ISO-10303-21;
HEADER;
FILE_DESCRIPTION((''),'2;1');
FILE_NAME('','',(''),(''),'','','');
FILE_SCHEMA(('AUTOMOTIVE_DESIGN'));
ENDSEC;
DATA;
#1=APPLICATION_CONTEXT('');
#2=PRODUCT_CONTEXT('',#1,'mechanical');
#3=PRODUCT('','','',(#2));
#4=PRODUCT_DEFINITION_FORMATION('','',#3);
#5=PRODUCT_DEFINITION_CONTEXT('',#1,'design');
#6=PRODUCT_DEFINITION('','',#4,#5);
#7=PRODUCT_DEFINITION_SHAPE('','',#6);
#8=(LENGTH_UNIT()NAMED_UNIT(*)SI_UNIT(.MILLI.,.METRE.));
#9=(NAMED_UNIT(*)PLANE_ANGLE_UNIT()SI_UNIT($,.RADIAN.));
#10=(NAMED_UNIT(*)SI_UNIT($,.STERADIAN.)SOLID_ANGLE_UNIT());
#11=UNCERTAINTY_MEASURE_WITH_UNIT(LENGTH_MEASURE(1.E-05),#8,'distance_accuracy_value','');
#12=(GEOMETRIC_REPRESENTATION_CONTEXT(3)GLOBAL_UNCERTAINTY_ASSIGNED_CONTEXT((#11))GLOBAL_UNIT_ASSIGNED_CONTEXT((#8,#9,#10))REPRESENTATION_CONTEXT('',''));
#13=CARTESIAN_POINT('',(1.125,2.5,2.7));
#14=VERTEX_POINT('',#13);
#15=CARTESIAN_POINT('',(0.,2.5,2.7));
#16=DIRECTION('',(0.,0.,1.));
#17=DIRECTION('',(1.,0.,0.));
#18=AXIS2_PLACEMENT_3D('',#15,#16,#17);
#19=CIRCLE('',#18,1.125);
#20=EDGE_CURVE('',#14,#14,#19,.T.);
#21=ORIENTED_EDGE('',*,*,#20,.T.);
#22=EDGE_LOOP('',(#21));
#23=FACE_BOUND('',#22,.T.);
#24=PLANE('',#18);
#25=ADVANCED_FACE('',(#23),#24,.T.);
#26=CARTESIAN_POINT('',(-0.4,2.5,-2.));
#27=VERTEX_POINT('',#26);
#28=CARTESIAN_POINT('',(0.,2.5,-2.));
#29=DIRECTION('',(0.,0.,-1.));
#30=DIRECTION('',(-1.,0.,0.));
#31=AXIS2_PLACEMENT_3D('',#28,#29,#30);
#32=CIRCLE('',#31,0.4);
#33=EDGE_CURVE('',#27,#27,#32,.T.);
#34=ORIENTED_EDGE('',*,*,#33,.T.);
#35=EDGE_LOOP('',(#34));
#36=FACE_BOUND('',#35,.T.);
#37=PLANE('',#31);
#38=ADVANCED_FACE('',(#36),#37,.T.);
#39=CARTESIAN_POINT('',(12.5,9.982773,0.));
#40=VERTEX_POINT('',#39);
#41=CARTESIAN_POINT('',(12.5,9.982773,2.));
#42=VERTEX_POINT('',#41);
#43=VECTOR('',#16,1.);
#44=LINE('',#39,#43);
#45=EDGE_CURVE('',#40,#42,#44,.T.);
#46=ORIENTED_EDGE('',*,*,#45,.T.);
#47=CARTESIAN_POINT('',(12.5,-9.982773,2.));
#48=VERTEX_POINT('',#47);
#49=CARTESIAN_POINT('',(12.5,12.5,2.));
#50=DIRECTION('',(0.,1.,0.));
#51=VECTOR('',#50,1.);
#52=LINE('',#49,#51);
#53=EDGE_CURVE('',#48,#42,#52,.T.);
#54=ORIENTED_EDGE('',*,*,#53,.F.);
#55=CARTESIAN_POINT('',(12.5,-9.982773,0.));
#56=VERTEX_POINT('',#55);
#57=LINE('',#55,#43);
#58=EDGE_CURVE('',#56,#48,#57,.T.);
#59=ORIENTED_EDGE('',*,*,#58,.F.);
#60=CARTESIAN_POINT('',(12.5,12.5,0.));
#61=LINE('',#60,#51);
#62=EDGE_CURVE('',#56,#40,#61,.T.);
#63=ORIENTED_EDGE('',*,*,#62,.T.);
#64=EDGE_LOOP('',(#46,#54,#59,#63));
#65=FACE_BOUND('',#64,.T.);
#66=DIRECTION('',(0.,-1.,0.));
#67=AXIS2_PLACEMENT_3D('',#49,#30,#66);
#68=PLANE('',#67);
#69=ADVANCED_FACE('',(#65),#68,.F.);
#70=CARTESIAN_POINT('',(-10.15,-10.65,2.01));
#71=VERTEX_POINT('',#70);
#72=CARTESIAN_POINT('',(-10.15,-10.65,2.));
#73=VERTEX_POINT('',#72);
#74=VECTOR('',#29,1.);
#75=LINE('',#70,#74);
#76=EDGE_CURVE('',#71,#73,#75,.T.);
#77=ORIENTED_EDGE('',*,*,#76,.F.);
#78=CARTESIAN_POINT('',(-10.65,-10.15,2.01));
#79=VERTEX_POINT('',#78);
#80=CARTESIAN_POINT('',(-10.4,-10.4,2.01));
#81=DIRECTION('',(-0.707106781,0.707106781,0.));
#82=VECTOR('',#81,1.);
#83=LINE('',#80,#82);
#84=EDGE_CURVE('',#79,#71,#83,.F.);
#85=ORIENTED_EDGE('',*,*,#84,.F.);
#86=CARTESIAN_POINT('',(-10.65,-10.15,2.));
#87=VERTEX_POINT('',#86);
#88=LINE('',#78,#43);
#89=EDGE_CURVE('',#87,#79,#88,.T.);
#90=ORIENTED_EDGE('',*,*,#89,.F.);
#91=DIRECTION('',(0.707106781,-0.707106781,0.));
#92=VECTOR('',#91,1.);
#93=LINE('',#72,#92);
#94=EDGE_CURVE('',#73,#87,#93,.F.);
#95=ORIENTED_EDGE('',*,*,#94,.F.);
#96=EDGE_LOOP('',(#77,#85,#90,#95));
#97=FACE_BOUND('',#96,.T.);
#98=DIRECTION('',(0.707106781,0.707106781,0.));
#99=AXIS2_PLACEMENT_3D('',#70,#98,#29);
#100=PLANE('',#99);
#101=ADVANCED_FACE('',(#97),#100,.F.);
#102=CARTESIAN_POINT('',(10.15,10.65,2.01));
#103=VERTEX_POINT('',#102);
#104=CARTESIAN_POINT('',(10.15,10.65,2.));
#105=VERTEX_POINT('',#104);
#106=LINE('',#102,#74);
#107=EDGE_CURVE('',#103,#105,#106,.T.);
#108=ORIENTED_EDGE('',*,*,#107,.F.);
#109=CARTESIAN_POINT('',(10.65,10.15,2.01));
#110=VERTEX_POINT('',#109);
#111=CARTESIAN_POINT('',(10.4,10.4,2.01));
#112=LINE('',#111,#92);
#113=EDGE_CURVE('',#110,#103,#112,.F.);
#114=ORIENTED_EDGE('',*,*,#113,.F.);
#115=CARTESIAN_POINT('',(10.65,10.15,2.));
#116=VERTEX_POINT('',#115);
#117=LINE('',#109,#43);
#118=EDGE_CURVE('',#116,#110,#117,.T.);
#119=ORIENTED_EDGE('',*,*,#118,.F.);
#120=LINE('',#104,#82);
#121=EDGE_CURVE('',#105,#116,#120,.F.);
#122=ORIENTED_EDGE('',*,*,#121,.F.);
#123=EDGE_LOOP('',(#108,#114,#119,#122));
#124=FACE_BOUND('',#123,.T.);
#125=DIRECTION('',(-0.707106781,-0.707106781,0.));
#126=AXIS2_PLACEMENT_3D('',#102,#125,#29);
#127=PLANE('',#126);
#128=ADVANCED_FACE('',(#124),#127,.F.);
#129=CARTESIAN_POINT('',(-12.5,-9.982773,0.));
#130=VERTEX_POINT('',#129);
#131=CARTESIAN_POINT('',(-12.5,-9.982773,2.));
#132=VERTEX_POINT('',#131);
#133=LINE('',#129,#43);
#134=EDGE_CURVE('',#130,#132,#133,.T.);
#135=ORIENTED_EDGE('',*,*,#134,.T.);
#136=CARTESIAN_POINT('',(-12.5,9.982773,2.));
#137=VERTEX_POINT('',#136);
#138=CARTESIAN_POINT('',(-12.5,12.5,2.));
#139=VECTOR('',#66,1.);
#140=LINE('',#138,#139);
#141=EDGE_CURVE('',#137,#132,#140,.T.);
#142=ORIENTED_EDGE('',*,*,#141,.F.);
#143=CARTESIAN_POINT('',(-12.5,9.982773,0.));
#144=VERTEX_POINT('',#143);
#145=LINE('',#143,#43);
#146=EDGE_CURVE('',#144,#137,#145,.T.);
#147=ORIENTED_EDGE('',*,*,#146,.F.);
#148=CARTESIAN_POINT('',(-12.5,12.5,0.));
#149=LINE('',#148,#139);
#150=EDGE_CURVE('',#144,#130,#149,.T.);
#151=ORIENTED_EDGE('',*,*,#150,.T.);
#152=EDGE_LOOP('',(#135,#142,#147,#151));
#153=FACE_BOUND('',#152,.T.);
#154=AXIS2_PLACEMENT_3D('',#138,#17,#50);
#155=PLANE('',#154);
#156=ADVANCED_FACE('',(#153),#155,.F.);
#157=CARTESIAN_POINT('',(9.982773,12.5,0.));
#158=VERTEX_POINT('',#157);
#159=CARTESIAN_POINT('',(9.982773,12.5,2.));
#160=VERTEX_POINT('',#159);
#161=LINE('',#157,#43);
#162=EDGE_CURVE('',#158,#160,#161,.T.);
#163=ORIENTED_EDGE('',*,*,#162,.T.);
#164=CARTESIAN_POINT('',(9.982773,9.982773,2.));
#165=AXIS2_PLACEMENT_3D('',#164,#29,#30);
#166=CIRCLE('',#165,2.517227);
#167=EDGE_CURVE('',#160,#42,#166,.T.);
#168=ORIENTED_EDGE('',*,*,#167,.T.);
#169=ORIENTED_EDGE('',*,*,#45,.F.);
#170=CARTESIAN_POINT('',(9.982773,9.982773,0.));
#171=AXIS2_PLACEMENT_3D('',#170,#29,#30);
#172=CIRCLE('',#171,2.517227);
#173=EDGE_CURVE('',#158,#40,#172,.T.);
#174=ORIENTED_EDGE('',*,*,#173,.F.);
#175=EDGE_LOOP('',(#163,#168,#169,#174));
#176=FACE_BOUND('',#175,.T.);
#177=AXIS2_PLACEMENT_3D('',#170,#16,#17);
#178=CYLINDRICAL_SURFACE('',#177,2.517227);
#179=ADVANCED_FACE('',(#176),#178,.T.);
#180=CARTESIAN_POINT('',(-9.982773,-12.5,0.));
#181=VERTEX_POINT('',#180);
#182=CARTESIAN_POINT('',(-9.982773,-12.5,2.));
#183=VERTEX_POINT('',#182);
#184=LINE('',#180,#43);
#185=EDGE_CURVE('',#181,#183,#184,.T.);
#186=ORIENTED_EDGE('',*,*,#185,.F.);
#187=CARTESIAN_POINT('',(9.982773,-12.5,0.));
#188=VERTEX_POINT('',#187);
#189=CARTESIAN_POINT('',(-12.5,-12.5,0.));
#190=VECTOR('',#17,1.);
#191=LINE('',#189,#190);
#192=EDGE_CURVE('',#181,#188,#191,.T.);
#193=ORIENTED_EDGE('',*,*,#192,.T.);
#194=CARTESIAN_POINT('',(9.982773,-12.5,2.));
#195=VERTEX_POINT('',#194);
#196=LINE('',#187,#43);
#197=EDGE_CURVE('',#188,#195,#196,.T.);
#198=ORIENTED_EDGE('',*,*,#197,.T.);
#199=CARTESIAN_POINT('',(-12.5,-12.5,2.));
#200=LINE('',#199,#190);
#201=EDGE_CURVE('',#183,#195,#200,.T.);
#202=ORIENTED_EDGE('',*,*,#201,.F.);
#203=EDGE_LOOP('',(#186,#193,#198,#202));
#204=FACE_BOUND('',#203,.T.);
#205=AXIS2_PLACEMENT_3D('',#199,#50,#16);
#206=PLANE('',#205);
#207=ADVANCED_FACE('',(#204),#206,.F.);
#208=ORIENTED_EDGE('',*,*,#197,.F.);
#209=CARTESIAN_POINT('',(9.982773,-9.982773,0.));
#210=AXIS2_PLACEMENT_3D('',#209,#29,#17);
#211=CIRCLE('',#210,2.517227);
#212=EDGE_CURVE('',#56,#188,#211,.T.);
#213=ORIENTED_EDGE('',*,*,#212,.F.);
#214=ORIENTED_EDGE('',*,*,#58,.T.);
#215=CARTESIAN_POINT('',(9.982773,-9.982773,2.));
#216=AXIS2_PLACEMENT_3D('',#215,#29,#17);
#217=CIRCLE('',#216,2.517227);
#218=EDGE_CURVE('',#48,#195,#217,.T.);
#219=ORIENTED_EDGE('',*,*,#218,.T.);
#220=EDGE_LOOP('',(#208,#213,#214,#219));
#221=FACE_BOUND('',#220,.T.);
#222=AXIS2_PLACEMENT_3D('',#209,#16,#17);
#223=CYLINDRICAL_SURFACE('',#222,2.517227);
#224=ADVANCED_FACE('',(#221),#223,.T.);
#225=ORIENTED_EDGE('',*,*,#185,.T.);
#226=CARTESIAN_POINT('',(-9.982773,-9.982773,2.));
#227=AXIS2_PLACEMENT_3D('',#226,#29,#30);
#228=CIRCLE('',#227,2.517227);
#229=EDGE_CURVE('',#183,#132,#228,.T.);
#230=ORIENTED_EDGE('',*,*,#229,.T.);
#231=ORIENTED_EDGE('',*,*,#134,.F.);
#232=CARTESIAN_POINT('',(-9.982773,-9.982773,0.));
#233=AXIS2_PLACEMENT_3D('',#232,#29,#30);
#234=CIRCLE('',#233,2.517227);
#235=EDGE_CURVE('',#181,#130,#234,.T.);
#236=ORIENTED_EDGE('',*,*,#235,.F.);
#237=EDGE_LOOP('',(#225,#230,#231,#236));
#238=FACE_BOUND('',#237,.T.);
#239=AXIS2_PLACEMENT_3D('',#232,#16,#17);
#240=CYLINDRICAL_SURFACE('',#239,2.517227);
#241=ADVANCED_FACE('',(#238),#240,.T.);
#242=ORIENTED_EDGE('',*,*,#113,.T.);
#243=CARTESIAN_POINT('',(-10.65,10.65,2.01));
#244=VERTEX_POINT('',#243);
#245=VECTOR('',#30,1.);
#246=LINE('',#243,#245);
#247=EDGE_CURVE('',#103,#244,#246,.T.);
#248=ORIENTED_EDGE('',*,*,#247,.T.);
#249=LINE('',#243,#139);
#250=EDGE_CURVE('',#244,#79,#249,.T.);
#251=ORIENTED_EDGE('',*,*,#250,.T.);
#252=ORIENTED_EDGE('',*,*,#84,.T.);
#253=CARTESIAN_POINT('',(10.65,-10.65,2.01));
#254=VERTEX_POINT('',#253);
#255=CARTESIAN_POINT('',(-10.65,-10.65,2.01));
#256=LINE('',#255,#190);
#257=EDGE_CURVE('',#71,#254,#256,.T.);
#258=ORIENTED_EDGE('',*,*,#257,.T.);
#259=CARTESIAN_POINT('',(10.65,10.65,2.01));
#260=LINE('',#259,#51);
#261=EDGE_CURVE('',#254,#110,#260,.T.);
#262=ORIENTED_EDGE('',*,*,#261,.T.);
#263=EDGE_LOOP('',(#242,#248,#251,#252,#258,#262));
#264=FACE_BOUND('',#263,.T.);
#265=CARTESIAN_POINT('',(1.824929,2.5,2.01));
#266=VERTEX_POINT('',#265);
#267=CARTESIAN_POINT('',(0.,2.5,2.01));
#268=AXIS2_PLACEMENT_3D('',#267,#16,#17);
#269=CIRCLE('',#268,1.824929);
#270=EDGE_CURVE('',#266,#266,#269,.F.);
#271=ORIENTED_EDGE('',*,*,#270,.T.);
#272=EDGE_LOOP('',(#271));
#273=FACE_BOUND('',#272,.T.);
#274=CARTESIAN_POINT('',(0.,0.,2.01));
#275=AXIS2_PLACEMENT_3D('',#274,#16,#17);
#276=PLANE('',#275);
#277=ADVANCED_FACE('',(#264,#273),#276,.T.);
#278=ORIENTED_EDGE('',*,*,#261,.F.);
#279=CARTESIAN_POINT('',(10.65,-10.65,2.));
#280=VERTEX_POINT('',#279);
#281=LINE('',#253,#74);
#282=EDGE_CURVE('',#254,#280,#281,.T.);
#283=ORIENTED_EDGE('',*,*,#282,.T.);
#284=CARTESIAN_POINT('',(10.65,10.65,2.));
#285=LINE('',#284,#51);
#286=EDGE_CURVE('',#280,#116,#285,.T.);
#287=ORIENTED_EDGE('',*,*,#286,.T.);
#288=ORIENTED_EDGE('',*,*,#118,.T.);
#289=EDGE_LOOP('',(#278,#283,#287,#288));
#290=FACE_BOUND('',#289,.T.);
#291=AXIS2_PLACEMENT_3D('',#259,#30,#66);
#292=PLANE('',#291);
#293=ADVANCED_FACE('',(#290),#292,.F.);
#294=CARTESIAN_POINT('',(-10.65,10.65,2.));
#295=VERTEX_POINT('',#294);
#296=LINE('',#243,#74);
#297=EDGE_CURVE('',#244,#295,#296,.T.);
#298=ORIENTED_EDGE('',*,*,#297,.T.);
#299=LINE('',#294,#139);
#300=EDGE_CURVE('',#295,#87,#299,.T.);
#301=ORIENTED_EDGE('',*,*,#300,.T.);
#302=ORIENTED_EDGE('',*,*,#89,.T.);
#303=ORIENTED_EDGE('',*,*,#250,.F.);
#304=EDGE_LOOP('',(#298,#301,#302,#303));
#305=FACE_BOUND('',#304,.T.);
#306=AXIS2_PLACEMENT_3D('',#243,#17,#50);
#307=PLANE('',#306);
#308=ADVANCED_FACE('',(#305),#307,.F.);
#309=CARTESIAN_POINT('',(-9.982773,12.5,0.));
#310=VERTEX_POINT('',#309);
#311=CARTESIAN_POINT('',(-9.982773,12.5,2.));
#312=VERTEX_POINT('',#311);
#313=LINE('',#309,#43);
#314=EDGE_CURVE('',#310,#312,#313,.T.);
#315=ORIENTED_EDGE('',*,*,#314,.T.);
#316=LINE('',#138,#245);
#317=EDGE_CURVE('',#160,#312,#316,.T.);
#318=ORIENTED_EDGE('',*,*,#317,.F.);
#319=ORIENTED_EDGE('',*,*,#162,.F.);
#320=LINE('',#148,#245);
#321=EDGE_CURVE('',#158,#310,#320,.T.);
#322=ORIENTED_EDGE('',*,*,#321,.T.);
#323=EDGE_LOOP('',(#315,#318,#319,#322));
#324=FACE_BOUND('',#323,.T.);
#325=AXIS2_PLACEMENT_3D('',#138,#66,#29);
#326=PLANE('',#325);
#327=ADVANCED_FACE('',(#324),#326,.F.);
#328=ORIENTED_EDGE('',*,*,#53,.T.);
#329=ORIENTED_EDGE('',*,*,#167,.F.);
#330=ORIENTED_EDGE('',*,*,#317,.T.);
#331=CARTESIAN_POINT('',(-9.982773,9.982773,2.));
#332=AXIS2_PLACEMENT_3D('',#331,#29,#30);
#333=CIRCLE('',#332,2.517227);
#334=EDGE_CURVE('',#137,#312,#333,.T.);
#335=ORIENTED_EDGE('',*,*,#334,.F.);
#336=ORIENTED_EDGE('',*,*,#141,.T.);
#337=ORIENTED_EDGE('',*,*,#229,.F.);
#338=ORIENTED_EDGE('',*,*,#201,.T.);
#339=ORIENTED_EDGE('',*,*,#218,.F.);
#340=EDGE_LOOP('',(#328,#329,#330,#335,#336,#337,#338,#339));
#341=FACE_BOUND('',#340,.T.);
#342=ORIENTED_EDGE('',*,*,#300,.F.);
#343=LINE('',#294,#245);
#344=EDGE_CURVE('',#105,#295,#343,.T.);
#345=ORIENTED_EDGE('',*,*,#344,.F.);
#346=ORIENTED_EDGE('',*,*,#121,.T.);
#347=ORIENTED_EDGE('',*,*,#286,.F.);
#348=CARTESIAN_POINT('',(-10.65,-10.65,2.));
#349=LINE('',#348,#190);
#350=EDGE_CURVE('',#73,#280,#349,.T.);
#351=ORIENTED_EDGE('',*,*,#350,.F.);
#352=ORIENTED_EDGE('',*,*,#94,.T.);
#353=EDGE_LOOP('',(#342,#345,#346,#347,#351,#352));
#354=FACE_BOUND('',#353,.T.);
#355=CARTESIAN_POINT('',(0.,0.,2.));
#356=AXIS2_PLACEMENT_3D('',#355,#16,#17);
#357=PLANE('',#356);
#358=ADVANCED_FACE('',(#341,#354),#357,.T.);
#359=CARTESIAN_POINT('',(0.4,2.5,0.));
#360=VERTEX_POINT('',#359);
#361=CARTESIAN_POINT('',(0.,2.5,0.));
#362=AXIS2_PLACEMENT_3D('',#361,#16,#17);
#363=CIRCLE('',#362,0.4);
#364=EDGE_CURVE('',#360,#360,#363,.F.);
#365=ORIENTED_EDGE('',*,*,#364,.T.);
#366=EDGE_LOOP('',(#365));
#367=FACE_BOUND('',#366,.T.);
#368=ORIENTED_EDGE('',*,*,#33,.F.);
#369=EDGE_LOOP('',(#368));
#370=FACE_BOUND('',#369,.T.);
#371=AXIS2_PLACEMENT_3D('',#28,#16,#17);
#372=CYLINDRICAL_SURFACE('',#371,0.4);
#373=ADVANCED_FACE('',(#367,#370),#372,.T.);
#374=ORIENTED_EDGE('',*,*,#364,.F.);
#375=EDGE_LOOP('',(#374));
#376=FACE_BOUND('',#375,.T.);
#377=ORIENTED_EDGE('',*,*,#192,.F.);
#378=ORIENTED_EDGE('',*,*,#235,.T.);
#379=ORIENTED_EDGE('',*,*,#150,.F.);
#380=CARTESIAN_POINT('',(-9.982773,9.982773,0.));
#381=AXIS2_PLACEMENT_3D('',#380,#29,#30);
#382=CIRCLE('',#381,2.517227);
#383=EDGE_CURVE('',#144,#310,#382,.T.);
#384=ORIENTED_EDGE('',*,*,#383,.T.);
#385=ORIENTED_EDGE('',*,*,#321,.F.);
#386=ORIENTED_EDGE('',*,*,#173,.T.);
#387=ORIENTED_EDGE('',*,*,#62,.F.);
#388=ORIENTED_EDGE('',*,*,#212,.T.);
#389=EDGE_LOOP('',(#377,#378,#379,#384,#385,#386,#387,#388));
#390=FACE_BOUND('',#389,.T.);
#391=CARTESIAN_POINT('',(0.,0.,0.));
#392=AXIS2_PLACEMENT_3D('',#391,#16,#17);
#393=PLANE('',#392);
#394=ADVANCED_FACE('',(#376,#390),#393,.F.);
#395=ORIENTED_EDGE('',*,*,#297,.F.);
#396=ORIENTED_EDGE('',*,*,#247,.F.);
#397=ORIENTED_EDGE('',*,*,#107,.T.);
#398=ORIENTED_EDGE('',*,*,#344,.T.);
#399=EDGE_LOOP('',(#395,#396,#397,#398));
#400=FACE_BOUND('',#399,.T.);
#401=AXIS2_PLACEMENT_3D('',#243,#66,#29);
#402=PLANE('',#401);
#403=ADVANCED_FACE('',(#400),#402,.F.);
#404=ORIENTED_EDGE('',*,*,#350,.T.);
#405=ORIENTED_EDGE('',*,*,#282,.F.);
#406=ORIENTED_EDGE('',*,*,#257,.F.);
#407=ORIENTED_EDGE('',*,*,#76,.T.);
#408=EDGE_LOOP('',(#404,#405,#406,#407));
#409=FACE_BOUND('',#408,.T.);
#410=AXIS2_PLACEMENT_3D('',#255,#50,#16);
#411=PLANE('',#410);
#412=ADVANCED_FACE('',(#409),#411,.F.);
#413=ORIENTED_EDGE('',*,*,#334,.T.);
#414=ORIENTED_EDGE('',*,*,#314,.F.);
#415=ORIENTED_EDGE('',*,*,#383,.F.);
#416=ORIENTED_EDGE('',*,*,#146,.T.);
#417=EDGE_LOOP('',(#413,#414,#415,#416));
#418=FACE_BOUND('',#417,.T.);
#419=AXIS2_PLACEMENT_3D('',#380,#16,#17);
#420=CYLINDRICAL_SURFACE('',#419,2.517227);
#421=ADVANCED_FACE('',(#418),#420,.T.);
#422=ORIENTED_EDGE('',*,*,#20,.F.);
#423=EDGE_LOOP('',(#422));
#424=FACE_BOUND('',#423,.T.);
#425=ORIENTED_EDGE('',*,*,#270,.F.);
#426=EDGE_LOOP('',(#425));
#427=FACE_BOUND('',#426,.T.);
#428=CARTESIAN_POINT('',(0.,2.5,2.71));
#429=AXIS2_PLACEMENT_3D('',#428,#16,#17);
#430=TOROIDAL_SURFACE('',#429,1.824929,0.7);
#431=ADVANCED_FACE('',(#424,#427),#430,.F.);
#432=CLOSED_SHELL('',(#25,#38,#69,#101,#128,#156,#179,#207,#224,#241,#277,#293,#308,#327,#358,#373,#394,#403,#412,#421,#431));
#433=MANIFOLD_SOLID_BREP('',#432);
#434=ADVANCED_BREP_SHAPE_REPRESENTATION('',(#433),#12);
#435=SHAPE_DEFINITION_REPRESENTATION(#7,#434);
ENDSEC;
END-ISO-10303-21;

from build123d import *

# Parameters (mm, degrees)
SKETCH1_W           = 25
SKETCH1_H           = 25
BOSS_EXTRUDE1_DEPTH = 2
SKETCH4_R           = 1.125
BOSS_EXTRUDE3_DEPTH = 0.7
SKETCH5_W           = 21.3
SKETCH5_H           = 21.3
BOSS_EXTRUDE4_DEPTH = 0.01
FILLET1_R           = 0.7
CHAMFER1_SIZE       = 0.5
CUT_EXTRUDE1_DEPTH  = 18.790446875
SKETCH7_R           = 0.4
BOSS_EXTRUDE5_DEPTH = 2


with BuildPart() as part:
    # Sketch1 → Boss-Extrude1 (new body)
    with BuildSketch(Plane.XY):
        Rectangle(SKETCH1_W, SKETCH1_H)
    extrude(amount=BOSS_EXTRUDE1_DEPTH)

    # Sketch4 → Boss-Extrude3 (add)
    with BuildSketch(Plane.XY.offset(2)):
        with Locations((0, 2.5)):
            Circle(SKETCH4_R)
    extrude(amount=BOSS_EXTRUDE3_DEPTH)

    # Sketch5 → Boss-Extrude4 (add)
    with BuildSketch(Plane.XY.offset(2)):
        Rectangle(SKETCH5_W, SKETCH5_H)
    extrude(amount=BOSS_EXTRUDE4_DEPTH)

    # Fillet1
    # the kernel refuses this fillet: 0.7 mm, written as the material it adds along each edge
    with BuildSketch(Plane(origin=(0, 2.5, 2.01), x_dir=(1, 0, 0), z_dir=(0, 1, 0))) as fillet1_piece_1_section:
        with BuildLine():
            CenterArc((1.125 + FILLET1_R, -FILLET1_R), FILLET1_R, 90, 90)
            Line((1.125, -FILLET1_R), (1.125, 0))
            Line((1.125, 0), (1.125 + FILLET1_R, 0))
        make_face()
    fillet1_piece_1 = revolve(axis=Axis((0, 2.5, 2.01), (0, 0, -1)), mode=Mode.PRIVATE)
    fillet1_piece_1 = split(fillet1_piece_1, bisect_by=Plane(origin=(-1.326537578, 2.5, 2.7), z_dir=(0, 0, -1)), keep=Keep.TOP, mode=Mode.PRIVATE)
    add(fillet1_piece_1)

    # Chamfer1
    chamfer1_edges = [part.edges().sort_by_distance(p)[0] for p in [
        (-10.65, -10.65, 2.005),
        (10.65, 10.65, 2.005),
    ]]
    chamfer(chamfer1_edges, length=CHAMFER1_SIZE)

    # Sketch6 → Cut-Extrude1 (cut, through all)
    with BuildSketch(Plane.XY.offset(2)):
        with BuildLine():
            Line((12.5, 9.98277308), (12.5, 12.5))
            Line((12.5, 12.5), (9.98277308, 12.5))
            ThreePointArc((9.98277308, 12.5), (11.762721305, 11.762721305), (12.5, 9.98277308))
        make_face()
        with BuildLine():
            Line((-9.98277308, 12.5), (-12.5, 12.5))
            Line((-12.5, 12.5), (-12.5, 9.98277308))
            ThreePointArc((-12.5, 9.98277308), (-11.762721305, 11.762721305), (-9.98277308, 12.5))
        make_face()
        with BuildLine():
            Line((-12.5, -9.98277308), (-12.5, -12.5))
            Line((-12.5, -12.5), (-9.98277308, -12.5))
            ThreePointArc((-9.98277308, -12.5), (-11.762721305, -11.762721305), (-12.5, -9.98277308))
        make_face()
        with BuildLine():
            Line((12.5, -9.98277308), (12.5, -12.5))
            Line((12.5, -12.5), (9.98277308, -12.5))
            ThreePointArc((9.98277308, -12.5), (11.762721305, -11.762721305), (12.5, -9.98277308))
        make_face()
    extrude(amount=-CUT_EXTRUDE1_DEPTH, mode=Mode.SUBTRACT)

    # Sketch7 → Boss-Extrude5 (add)
    with BuildSketch(Plane(origin=(0, 0, 0), x_dir=(-1, 0, 0), z_dir=(0, 0, -1))):
        with Locations(Location((0, 2.5, 0), (0, 0, 180))):
            Circle(SKETCH7_R)
    extrude(amount=BOSS_EXTRUDE5_DEPTH)


solid = part.part
